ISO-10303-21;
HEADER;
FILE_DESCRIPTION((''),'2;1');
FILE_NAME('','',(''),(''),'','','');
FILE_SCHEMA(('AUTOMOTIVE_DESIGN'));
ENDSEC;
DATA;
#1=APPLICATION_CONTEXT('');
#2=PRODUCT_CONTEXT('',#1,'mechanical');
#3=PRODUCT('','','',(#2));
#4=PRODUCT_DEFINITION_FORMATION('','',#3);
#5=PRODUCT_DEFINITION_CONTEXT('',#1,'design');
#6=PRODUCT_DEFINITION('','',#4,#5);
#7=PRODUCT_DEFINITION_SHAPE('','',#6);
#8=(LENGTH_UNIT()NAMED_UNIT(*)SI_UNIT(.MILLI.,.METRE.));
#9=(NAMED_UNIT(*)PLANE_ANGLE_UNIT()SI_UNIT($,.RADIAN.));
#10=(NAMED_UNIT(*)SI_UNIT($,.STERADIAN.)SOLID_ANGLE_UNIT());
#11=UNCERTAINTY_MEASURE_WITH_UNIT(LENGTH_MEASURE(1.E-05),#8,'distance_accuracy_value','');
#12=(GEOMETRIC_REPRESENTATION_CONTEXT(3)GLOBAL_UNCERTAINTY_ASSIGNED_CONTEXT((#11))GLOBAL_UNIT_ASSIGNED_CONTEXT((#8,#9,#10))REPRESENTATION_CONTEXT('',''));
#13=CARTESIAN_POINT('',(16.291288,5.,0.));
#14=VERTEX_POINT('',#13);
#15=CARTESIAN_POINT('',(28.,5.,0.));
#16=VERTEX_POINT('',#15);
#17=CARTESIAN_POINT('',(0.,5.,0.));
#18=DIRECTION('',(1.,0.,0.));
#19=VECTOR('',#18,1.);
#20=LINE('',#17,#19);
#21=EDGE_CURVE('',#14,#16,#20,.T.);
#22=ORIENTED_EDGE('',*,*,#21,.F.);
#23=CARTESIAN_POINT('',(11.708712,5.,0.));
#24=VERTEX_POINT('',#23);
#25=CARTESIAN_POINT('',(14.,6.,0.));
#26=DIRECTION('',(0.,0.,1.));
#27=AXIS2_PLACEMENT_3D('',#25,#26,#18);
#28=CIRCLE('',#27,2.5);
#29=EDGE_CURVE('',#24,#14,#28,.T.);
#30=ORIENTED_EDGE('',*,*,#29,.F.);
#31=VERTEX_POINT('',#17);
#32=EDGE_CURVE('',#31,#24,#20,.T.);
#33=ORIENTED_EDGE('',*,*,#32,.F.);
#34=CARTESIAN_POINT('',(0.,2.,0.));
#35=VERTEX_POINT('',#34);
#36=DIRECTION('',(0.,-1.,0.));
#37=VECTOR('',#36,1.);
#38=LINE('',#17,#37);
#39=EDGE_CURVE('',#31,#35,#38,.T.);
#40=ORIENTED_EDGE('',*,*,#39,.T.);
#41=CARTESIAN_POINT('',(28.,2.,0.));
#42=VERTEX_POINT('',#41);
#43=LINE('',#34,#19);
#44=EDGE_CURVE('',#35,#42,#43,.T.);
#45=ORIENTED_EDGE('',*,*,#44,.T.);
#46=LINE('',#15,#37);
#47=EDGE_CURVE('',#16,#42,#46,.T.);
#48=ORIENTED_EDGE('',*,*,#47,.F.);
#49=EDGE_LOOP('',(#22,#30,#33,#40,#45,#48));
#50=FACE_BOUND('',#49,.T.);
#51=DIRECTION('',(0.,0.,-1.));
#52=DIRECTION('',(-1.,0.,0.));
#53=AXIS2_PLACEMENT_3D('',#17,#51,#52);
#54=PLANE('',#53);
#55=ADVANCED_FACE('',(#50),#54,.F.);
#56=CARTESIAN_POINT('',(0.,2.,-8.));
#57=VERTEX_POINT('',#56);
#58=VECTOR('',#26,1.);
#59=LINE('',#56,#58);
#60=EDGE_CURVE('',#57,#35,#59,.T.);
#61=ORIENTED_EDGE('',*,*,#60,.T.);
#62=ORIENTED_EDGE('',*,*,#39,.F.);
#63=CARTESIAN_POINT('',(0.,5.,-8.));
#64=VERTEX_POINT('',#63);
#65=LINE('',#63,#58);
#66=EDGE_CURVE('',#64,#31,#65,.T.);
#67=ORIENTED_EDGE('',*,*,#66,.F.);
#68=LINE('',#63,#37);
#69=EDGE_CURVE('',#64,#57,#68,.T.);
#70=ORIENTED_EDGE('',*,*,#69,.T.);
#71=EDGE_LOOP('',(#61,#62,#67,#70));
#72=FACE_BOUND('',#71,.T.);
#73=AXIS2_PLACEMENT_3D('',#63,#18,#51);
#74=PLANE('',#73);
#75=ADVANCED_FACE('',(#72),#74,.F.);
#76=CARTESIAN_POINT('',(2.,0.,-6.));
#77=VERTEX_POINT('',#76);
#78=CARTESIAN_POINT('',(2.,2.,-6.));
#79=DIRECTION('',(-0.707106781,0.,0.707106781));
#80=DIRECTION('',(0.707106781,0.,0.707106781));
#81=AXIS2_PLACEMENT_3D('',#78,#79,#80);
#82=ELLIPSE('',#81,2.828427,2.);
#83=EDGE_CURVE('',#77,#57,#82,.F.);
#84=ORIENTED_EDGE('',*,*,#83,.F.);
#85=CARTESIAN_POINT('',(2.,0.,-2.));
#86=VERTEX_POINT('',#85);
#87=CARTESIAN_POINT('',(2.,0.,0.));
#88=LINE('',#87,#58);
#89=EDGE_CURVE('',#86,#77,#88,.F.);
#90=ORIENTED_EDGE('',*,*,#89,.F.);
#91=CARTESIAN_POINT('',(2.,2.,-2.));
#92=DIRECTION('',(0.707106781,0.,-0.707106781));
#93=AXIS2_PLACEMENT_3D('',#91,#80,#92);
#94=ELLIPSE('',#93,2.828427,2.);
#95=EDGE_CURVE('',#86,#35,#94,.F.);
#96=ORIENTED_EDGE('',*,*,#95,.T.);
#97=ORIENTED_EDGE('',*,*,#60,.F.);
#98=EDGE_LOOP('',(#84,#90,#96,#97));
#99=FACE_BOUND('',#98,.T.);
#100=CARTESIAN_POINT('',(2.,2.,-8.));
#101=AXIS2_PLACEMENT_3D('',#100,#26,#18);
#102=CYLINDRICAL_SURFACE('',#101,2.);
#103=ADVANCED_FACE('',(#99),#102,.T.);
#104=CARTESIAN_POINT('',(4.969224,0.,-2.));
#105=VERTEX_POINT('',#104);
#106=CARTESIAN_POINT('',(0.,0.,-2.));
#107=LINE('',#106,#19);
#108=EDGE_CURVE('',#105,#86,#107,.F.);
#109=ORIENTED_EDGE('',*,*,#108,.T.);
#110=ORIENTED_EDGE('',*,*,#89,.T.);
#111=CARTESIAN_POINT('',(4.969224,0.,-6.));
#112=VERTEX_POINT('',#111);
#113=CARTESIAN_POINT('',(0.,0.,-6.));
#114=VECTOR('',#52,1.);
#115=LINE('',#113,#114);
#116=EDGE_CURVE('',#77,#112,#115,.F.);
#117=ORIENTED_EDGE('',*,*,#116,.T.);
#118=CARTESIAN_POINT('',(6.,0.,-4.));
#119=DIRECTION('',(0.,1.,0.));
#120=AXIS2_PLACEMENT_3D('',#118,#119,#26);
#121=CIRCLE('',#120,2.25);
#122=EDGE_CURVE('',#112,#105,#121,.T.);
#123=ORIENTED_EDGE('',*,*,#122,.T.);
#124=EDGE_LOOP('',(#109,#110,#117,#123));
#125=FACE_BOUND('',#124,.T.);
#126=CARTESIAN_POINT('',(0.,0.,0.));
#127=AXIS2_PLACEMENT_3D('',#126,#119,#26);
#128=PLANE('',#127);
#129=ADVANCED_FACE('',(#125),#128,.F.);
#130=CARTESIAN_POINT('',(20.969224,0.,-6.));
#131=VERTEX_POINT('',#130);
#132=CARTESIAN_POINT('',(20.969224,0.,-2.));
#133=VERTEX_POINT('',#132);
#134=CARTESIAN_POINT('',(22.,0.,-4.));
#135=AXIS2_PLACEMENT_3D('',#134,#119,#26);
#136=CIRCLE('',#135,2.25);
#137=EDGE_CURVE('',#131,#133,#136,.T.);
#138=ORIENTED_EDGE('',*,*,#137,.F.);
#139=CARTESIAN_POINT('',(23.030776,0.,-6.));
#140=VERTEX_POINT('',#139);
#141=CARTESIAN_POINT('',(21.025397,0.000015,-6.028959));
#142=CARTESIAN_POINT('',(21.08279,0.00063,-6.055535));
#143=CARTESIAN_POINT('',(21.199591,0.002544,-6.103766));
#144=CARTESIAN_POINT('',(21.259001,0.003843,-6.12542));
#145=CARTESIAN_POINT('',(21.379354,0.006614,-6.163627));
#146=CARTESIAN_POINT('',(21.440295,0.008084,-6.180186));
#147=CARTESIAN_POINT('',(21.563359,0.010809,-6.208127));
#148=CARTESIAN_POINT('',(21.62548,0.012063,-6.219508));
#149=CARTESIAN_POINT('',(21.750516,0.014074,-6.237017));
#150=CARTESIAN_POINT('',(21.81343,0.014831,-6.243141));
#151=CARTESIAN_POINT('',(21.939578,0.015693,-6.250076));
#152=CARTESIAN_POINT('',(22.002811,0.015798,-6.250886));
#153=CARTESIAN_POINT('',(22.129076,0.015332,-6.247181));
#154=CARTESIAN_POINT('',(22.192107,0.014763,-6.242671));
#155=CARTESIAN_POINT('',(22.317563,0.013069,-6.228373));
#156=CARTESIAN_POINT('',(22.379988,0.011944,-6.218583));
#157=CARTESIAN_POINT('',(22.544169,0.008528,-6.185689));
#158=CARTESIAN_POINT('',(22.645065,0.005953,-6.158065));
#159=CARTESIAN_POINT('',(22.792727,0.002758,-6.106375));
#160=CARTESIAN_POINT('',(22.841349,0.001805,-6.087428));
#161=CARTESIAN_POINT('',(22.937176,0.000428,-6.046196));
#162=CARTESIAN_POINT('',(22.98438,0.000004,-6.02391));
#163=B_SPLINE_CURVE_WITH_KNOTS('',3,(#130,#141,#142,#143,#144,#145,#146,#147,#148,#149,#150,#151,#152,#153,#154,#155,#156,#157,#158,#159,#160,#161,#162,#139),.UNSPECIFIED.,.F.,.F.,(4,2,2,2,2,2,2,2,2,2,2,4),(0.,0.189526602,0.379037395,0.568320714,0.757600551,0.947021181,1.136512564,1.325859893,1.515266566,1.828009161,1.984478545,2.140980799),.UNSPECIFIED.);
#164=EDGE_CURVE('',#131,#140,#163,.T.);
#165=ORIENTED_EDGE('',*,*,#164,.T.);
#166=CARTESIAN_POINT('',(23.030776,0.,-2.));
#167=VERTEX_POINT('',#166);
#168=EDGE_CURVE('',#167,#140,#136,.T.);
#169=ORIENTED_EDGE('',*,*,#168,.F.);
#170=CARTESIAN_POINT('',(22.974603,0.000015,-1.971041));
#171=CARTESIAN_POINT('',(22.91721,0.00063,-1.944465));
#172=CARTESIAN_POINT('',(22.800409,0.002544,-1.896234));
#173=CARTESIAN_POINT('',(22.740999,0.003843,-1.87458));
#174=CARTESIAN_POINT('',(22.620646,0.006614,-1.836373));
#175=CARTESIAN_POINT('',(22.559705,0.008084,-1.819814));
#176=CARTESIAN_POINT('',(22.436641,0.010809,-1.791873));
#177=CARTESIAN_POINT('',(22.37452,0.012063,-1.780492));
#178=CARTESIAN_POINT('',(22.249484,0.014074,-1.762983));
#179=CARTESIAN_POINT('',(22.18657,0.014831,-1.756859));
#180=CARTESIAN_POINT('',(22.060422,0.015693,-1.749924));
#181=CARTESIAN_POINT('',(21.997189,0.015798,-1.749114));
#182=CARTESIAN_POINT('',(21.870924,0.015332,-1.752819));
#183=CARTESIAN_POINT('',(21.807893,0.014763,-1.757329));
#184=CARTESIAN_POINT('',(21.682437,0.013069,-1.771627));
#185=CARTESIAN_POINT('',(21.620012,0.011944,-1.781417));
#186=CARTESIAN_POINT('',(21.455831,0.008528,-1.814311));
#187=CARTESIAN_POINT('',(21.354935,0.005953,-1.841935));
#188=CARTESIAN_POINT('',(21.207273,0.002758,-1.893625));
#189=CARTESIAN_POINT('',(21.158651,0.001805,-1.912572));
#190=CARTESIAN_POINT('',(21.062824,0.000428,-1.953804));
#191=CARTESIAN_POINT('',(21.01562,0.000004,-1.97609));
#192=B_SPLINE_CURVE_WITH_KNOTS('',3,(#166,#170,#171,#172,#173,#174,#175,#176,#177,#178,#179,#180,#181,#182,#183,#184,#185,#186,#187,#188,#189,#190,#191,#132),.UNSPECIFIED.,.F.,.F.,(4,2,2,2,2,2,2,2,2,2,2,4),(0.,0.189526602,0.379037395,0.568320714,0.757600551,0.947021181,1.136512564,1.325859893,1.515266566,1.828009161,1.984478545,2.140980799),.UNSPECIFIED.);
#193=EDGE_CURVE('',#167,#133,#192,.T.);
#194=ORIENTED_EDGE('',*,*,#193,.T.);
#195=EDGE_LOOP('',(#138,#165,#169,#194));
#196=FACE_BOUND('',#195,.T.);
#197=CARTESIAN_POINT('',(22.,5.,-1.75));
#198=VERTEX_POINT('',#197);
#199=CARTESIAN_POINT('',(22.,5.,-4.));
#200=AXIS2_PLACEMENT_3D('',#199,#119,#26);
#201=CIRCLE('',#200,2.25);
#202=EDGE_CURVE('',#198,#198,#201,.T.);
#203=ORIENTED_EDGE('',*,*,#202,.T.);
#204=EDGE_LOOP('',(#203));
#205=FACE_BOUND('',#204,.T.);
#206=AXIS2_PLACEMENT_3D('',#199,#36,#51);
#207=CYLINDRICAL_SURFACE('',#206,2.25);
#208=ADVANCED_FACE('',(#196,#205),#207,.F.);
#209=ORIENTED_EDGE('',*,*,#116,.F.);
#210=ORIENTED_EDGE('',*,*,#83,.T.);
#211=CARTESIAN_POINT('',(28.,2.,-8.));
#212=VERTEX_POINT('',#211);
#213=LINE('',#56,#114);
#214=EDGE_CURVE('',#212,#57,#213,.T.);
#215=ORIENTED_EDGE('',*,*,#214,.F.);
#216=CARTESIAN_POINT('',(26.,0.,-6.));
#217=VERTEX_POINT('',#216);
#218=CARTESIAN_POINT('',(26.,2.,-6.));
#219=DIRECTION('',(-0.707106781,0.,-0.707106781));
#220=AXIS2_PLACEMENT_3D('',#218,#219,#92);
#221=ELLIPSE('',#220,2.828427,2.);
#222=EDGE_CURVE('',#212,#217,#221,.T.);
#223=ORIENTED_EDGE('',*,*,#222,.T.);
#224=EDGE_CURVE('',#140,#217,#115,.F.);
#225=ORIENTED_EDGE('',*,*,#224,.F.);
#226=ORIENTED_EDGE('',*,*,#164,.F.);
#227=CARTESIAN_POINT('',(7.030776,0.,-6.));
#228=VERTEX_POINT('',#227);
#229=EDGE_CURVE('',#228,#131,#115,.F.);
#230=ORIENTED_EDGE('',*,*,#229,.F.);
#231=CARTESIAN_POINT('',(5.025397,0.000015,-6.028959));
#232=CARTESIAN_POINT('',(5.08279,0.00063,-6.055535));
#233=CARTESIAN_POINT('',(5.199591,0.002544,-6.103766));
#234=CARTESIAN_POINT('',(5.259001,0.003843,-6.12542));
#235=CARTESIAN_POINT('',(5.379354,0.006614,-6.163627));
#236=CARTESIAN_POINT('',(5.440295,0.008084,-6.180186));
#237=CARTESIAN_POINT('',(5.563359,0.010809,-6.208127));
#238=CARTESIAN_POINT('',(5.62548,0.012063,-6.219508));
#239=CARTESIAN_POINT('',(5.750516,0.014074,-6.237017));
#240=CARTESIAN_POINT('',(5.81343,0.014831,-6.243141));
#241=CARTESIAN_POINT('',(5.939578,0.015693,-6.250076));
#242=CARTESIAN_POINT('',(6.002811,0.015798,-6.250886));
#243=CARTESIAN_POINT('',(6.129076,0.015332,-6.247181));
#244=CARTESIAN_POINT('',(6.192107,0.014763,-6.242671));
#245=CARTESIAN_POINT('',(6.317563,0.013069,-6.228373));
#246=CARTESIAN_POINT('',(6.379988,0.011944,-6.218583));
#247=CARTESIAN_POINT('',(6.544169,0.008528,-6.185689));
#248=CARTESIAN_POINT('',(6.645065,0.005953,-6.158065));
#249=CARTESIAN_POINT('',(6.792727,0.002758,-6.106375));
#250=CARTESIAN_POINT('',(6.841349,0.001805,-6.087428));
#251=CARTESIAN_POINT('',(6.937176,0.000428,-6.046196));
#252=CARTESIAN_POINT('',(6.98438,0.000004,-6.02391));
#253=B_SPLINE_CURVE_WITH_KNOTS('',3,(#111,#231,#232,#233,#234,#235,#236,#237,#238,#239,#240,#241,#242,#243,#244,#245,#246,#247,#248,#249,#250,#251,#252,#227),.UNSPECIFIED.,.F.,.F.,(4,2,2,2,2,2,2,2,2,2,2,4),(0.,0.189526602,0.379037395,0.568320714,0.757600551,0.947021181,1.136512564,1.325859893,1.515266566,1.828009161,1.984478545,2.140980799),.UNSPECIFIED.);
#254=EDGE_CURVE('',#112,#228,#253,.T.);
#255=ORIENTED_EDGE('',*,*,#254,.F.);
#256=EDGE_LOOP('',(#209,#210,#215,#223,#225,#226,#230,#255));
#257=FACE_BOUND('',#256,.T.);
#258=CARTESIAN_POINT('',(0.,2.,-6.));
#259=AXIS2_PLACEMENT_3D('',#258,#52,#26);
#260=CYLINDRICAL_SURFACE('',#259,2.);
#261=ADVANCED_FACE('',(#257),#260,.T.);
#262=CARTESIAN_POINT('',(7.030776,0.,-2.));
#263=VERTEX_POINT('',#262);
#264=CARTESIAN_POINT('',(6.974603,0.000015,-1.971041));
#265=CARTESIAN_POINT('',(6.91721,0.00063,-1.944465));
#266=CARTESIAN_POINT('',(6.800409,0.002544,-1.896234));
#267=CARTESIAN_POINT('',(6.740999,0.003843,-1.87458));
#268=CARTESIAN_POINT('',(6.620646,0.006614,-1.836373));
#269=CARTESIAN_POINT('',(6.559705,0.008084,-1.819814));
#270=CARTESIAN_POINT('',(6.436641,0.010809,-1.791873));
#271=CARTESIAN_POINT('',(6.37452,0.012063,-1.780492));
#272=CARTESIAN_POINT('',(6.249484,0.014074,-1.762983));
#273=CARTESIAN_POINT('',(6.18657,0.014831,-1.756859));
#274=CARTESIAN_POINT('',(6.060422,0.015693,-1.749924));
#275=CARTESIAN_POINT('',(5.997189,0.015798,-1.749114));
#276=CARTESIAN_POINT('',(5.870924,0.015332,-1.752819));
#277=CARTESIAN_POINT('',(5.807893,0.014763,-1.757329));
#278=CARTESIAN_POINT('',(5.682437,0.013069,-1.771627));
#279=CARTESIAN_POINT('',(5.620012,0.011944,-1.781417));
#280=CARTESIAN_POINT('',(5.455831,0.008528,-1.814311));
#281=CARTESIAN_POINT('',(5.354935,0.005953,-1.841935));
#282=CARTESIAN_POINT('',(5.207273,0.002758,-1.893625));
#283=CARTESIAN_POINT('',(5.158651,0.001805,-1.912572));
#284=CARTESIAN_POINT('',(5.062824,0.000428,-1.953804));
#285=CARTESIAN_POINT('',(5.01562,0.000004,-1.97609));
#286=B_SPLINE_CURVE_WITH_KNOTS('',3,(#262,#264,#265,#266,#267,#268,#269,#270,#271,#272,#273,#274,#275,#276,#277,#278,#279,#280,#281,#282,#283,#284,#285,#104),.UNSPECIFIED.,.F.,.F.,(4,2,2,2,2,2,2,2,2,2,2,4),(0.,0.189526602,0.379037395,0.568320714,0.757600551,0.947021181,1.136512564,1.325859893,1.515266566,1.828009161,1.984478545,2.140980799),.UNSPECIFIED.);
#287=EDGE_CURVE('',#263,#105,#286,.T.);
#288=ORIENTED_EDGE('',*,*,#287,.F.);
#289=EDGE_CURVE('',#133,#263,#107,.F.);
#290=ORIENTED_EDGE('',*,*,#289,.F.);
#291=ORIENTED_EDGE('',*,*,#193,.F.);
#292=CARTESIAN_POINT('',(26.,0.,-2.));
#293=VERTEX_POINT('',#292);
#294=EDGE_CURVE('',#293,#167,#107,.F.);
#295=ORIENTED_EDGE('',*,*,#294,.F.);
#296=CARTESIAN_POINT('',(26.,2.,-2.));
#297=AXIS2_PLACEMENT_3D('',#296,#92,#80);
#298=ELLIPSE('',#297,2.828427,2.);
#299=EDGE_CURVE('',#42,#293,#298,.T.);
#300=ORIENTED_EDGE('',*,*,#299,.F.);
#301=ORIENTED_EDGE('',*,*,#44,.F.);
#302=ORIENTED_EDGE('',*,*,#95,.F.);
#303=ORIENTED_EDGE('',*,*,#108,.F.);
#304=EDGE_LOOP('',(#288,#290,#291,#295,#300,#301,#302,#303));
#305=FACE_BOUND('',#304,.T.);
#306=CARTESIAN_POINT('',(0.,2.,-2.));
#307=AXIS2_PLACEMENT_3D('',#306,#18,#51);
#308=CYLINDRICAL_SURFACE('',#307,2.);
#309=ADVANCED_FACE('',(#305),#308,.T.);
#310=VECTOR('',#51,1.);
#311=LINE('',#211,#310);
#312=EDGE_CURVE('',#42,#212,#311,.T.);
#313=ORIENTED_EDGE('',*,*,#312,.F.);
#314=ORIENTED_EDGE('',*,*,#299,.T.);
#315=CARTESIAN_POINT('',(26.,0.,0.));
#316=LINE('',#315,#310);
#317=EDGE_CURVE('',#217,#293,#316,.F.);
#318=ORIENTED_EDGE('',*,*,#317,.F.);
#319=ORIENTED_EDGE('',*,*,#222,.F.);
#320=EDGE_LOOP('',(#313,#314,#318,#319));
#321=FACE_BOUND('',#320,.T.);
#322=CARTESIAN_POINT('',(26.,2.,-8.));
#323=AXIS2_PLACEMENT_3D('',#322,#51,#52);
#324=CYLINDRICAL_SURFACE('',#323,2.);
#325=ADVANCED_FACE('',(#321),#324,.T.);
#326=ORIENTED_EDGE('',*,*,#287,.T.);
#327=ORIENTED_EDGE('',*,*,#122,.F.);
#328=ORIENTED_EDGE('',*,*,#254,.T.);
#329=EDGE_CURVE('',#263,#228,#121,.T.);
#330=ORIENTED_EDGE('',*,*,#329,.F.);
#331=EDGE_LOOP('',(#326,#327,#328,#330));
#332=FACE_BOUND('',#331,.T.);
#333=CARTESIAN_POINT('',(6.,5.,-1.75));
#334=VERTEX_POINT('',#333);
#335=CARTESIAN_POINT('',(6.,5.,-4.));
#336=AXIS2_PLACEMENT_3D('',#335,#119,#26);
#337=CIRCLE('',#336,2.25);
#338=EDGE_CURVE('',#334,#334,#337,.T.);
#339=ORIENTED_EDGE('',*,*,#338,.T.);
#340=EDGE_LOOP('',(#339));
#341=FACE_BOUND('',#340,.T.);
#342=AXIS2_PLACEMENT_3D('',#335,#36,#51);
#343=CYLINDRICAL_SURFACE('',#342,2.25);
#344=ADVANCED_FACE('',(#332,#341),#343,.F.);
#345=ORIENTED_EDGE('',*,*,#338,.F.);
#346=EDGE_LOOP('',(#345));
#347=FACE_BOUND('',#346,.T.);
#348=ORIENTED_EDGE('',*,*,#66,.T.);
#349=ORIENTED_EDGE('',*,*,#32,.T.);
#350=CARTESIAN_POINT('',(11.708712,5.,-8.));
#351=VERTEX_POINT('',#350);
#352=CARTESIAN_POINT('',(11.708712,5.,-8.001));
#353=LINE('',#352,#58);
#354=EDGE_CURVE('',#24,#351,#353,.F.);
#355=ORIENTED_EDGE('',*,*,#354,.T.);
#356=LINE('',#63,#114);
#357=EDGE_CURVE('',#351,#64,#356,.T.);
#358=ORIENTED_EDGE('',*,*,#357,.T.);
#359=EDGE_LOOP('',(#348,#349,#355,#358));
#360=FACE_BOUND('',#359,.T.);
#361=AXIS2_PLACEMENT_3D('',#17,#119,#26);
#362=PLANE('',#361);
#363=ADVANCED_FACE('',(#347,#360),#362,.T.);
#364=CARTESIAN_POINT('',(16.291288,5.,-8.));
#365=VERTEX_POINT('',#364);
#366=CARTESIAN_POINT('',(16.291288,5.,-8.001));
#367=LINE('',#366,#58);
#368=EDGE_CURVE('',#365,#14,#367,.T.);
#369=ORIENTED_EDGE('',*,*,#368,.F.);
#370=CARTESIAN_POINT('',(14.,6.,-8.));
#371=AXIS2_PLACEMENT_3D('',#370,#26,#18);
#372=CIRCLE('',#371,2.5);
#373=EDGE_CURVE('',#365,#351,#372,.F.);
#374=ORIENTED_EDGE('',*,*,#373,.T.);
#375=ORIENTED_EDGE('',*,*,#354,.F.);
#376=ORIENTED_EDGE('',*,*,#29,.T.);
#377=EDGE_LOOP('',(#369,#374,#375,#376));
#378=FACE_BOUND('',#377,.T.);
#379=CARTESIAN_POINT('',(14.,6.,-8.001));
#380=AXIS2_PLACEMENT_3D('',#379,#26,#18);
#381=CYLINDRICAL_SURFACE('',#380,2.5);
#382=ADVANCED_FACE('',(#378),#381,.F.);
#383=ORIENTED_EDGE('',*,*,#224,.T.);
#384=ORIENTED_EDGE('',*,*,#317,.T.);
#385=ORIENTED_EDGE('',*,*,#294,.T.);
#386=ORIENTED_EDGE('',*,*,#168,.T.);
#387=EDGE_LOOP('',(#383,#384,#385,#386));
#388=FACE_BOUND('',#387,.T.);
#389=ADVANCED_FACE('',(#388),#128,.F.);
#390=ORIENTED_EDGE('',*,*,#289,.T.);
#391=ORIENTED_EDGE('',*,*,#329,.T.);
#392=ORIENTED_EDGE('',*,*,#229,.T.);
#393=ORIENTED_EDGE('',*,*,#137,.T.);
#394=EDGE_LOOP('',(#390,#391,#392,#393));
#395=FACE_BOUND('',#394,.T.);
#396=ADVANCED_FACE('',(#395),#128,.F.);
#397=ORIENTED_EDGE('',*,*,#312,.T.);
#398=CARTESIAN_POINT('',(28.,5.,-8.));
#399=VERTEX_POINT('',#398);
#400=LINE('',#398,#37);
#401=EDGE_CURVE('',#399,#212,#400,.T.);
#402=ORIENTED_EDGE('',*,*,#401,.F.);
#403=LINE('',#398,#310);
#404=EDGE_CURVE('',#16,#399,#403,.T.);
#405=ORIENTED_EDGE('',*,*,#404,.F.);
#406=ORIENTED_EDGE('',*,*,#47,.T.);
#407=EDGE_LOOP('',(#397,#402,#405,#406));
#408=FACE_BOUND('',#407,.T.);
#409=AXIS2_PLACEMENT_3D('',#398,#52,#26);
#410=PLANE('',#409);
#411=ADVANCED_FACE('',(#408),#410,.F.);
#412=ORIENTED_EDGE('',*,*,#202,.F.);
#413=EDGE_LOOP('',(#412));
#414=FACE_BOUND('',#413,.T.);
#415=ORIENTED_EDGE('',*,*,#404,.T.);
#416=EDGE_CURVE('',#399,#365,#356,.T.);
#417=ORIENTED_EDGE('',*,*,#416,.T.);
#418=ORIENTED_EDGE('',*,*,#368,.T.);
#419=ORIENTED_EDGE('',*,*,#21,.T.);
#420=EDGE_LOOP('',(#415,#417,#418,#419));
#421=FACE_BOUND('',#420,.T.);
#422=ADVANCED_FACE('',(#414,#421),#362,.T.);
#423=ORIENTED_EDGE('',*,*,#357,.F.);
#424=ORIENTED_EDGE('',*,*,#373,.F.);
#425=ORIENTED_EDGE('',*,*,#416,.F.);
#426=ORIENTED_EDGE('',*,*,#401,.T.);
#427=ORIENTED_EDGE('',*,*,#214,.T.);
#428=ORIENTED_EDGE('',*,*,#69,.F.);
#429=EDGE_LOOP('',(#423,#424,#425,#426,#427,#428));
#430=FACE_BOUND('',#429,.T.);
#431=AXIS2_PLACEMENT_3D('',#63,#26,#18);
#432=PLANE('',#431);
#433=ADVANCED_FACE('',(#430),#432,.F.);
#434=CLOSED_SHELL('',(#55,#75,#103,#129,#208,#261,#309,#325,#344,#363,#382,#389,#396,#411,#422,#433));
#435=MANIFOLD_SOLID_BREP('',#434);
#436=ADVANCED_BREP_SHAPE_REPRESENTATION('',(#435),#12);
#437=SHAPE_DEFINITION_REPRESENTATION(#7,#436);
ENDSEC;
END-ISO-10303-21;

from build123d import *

# Parameters (mm, degrees)
SKETCH1_W           = 28
SKETCH1_H           = 8
SKETCH1_R           = 2.25
BOSS_EXTRUDE1_DEPTH = 5
CUT_EXTRUDE1_REACH  = 31.547
FILLET1_R           = 2


with BuildPart() as part:
    # Sketch1 → Boss-Extrude1 (new body)
    with BuildSketch(Plane(origin=(0, 0, 0), x_dir=(1, 0, 0), z_dir=(0, 1, 0))):
        with Locations((14, 4)):
            Rectangle(SKETCH1_W, SKETCH1_H)
        with Locations(Location((6, 4, 0), (0, 0, 270))):
            Circle(SKETCH1_R, mode=Mode.SUBTRACT)
        with Locations(Location((22, 4, 0), (0, 0, 270))):
            Circle(SKETCH1_R, mode=Mode.SUBTRACT)
    extrude(amount=BOSS_EXTRUDE1_DEPTH)

    # Sketch2 → Cut-Extrude1 (cut, up to next)
    with BuildSketch(Plane.XY, mode=Mode.PRIVATE) as cut_extrude1_sk1:
        with BuildLine():
            Line((11.5, 6), (16.5, 6))
            ThreePointArc((16.5, 6), (14, 3.5), (11.5, 6))
        make_face()
    cut_extrude1_tool1 = extrude(cut_extrude1_sk1.sketch, amount=-CUT_EXTRUDE1_REACH, mode=Mode.PRIVATE) & part.part
    add(cut_extrude1_tool1.solids().sort_by_distance((14, 4.938967, 0))[0], mode=Mode.SUBTRACT)

    # Fillet1
    # the kernel refuses this fillet: 2 mm, written as the material it takes off along each edge
    with BuildSketch(Plane(origin=(-5, 0, -8), x_dir=(0, 1, 0), z_dir=(1, 0, 0))) as fillet1_piece_1:
        with BuildLine():
            CenterArc((FILLET1_R, FILLET1_R), FILLET1_R, 180, 90)
            Line((0, FILLET1_R), (0, 0))
            Line((0, 0), (FILLET1_R, 0))
        make_face()
    extrude(amount=38, mode=Mode.SUBTRACT)
    with BuildSketch(Plane(origin=(28, 0, -13), x_dir=(-1, 0, 0), z_dir=(0, 0, 1)), Plane(origin=(0, 0, 5), x_dir=(1, 0, 0), z_dir=(0, 0, -1))) as fillet1_piece_2:
        with BuildLine():
            CenterArc((FILLET1_R, -FILLET1_R), FILLET1_R, 90, 90)
            Line((0, -FILLET1_R), (0, 0))
            Line((0, 0), (FILLET1_R, 0))
        make_face()
    extrude(amount=18, mode=Mode.SUBTRACT)
    with BuildSketch(Plane(origin=(33, 0, 0), x_dir=(0, 0, -1), z_dir=(-1, 0, 0))) as fillet1_piece_3:
        with BuildLine():
            CenterArc((FILLET1_R, -FILLET1_R), FILLET1_R, 90, 90)
            Line((0, -FILLET1_R), (0, 0))
            Line((0, 0), (FILLET1_R, 0))
        make_face()
    extrude(amount=38, mode=Mode.SUBTRACT)


solid = part.part
